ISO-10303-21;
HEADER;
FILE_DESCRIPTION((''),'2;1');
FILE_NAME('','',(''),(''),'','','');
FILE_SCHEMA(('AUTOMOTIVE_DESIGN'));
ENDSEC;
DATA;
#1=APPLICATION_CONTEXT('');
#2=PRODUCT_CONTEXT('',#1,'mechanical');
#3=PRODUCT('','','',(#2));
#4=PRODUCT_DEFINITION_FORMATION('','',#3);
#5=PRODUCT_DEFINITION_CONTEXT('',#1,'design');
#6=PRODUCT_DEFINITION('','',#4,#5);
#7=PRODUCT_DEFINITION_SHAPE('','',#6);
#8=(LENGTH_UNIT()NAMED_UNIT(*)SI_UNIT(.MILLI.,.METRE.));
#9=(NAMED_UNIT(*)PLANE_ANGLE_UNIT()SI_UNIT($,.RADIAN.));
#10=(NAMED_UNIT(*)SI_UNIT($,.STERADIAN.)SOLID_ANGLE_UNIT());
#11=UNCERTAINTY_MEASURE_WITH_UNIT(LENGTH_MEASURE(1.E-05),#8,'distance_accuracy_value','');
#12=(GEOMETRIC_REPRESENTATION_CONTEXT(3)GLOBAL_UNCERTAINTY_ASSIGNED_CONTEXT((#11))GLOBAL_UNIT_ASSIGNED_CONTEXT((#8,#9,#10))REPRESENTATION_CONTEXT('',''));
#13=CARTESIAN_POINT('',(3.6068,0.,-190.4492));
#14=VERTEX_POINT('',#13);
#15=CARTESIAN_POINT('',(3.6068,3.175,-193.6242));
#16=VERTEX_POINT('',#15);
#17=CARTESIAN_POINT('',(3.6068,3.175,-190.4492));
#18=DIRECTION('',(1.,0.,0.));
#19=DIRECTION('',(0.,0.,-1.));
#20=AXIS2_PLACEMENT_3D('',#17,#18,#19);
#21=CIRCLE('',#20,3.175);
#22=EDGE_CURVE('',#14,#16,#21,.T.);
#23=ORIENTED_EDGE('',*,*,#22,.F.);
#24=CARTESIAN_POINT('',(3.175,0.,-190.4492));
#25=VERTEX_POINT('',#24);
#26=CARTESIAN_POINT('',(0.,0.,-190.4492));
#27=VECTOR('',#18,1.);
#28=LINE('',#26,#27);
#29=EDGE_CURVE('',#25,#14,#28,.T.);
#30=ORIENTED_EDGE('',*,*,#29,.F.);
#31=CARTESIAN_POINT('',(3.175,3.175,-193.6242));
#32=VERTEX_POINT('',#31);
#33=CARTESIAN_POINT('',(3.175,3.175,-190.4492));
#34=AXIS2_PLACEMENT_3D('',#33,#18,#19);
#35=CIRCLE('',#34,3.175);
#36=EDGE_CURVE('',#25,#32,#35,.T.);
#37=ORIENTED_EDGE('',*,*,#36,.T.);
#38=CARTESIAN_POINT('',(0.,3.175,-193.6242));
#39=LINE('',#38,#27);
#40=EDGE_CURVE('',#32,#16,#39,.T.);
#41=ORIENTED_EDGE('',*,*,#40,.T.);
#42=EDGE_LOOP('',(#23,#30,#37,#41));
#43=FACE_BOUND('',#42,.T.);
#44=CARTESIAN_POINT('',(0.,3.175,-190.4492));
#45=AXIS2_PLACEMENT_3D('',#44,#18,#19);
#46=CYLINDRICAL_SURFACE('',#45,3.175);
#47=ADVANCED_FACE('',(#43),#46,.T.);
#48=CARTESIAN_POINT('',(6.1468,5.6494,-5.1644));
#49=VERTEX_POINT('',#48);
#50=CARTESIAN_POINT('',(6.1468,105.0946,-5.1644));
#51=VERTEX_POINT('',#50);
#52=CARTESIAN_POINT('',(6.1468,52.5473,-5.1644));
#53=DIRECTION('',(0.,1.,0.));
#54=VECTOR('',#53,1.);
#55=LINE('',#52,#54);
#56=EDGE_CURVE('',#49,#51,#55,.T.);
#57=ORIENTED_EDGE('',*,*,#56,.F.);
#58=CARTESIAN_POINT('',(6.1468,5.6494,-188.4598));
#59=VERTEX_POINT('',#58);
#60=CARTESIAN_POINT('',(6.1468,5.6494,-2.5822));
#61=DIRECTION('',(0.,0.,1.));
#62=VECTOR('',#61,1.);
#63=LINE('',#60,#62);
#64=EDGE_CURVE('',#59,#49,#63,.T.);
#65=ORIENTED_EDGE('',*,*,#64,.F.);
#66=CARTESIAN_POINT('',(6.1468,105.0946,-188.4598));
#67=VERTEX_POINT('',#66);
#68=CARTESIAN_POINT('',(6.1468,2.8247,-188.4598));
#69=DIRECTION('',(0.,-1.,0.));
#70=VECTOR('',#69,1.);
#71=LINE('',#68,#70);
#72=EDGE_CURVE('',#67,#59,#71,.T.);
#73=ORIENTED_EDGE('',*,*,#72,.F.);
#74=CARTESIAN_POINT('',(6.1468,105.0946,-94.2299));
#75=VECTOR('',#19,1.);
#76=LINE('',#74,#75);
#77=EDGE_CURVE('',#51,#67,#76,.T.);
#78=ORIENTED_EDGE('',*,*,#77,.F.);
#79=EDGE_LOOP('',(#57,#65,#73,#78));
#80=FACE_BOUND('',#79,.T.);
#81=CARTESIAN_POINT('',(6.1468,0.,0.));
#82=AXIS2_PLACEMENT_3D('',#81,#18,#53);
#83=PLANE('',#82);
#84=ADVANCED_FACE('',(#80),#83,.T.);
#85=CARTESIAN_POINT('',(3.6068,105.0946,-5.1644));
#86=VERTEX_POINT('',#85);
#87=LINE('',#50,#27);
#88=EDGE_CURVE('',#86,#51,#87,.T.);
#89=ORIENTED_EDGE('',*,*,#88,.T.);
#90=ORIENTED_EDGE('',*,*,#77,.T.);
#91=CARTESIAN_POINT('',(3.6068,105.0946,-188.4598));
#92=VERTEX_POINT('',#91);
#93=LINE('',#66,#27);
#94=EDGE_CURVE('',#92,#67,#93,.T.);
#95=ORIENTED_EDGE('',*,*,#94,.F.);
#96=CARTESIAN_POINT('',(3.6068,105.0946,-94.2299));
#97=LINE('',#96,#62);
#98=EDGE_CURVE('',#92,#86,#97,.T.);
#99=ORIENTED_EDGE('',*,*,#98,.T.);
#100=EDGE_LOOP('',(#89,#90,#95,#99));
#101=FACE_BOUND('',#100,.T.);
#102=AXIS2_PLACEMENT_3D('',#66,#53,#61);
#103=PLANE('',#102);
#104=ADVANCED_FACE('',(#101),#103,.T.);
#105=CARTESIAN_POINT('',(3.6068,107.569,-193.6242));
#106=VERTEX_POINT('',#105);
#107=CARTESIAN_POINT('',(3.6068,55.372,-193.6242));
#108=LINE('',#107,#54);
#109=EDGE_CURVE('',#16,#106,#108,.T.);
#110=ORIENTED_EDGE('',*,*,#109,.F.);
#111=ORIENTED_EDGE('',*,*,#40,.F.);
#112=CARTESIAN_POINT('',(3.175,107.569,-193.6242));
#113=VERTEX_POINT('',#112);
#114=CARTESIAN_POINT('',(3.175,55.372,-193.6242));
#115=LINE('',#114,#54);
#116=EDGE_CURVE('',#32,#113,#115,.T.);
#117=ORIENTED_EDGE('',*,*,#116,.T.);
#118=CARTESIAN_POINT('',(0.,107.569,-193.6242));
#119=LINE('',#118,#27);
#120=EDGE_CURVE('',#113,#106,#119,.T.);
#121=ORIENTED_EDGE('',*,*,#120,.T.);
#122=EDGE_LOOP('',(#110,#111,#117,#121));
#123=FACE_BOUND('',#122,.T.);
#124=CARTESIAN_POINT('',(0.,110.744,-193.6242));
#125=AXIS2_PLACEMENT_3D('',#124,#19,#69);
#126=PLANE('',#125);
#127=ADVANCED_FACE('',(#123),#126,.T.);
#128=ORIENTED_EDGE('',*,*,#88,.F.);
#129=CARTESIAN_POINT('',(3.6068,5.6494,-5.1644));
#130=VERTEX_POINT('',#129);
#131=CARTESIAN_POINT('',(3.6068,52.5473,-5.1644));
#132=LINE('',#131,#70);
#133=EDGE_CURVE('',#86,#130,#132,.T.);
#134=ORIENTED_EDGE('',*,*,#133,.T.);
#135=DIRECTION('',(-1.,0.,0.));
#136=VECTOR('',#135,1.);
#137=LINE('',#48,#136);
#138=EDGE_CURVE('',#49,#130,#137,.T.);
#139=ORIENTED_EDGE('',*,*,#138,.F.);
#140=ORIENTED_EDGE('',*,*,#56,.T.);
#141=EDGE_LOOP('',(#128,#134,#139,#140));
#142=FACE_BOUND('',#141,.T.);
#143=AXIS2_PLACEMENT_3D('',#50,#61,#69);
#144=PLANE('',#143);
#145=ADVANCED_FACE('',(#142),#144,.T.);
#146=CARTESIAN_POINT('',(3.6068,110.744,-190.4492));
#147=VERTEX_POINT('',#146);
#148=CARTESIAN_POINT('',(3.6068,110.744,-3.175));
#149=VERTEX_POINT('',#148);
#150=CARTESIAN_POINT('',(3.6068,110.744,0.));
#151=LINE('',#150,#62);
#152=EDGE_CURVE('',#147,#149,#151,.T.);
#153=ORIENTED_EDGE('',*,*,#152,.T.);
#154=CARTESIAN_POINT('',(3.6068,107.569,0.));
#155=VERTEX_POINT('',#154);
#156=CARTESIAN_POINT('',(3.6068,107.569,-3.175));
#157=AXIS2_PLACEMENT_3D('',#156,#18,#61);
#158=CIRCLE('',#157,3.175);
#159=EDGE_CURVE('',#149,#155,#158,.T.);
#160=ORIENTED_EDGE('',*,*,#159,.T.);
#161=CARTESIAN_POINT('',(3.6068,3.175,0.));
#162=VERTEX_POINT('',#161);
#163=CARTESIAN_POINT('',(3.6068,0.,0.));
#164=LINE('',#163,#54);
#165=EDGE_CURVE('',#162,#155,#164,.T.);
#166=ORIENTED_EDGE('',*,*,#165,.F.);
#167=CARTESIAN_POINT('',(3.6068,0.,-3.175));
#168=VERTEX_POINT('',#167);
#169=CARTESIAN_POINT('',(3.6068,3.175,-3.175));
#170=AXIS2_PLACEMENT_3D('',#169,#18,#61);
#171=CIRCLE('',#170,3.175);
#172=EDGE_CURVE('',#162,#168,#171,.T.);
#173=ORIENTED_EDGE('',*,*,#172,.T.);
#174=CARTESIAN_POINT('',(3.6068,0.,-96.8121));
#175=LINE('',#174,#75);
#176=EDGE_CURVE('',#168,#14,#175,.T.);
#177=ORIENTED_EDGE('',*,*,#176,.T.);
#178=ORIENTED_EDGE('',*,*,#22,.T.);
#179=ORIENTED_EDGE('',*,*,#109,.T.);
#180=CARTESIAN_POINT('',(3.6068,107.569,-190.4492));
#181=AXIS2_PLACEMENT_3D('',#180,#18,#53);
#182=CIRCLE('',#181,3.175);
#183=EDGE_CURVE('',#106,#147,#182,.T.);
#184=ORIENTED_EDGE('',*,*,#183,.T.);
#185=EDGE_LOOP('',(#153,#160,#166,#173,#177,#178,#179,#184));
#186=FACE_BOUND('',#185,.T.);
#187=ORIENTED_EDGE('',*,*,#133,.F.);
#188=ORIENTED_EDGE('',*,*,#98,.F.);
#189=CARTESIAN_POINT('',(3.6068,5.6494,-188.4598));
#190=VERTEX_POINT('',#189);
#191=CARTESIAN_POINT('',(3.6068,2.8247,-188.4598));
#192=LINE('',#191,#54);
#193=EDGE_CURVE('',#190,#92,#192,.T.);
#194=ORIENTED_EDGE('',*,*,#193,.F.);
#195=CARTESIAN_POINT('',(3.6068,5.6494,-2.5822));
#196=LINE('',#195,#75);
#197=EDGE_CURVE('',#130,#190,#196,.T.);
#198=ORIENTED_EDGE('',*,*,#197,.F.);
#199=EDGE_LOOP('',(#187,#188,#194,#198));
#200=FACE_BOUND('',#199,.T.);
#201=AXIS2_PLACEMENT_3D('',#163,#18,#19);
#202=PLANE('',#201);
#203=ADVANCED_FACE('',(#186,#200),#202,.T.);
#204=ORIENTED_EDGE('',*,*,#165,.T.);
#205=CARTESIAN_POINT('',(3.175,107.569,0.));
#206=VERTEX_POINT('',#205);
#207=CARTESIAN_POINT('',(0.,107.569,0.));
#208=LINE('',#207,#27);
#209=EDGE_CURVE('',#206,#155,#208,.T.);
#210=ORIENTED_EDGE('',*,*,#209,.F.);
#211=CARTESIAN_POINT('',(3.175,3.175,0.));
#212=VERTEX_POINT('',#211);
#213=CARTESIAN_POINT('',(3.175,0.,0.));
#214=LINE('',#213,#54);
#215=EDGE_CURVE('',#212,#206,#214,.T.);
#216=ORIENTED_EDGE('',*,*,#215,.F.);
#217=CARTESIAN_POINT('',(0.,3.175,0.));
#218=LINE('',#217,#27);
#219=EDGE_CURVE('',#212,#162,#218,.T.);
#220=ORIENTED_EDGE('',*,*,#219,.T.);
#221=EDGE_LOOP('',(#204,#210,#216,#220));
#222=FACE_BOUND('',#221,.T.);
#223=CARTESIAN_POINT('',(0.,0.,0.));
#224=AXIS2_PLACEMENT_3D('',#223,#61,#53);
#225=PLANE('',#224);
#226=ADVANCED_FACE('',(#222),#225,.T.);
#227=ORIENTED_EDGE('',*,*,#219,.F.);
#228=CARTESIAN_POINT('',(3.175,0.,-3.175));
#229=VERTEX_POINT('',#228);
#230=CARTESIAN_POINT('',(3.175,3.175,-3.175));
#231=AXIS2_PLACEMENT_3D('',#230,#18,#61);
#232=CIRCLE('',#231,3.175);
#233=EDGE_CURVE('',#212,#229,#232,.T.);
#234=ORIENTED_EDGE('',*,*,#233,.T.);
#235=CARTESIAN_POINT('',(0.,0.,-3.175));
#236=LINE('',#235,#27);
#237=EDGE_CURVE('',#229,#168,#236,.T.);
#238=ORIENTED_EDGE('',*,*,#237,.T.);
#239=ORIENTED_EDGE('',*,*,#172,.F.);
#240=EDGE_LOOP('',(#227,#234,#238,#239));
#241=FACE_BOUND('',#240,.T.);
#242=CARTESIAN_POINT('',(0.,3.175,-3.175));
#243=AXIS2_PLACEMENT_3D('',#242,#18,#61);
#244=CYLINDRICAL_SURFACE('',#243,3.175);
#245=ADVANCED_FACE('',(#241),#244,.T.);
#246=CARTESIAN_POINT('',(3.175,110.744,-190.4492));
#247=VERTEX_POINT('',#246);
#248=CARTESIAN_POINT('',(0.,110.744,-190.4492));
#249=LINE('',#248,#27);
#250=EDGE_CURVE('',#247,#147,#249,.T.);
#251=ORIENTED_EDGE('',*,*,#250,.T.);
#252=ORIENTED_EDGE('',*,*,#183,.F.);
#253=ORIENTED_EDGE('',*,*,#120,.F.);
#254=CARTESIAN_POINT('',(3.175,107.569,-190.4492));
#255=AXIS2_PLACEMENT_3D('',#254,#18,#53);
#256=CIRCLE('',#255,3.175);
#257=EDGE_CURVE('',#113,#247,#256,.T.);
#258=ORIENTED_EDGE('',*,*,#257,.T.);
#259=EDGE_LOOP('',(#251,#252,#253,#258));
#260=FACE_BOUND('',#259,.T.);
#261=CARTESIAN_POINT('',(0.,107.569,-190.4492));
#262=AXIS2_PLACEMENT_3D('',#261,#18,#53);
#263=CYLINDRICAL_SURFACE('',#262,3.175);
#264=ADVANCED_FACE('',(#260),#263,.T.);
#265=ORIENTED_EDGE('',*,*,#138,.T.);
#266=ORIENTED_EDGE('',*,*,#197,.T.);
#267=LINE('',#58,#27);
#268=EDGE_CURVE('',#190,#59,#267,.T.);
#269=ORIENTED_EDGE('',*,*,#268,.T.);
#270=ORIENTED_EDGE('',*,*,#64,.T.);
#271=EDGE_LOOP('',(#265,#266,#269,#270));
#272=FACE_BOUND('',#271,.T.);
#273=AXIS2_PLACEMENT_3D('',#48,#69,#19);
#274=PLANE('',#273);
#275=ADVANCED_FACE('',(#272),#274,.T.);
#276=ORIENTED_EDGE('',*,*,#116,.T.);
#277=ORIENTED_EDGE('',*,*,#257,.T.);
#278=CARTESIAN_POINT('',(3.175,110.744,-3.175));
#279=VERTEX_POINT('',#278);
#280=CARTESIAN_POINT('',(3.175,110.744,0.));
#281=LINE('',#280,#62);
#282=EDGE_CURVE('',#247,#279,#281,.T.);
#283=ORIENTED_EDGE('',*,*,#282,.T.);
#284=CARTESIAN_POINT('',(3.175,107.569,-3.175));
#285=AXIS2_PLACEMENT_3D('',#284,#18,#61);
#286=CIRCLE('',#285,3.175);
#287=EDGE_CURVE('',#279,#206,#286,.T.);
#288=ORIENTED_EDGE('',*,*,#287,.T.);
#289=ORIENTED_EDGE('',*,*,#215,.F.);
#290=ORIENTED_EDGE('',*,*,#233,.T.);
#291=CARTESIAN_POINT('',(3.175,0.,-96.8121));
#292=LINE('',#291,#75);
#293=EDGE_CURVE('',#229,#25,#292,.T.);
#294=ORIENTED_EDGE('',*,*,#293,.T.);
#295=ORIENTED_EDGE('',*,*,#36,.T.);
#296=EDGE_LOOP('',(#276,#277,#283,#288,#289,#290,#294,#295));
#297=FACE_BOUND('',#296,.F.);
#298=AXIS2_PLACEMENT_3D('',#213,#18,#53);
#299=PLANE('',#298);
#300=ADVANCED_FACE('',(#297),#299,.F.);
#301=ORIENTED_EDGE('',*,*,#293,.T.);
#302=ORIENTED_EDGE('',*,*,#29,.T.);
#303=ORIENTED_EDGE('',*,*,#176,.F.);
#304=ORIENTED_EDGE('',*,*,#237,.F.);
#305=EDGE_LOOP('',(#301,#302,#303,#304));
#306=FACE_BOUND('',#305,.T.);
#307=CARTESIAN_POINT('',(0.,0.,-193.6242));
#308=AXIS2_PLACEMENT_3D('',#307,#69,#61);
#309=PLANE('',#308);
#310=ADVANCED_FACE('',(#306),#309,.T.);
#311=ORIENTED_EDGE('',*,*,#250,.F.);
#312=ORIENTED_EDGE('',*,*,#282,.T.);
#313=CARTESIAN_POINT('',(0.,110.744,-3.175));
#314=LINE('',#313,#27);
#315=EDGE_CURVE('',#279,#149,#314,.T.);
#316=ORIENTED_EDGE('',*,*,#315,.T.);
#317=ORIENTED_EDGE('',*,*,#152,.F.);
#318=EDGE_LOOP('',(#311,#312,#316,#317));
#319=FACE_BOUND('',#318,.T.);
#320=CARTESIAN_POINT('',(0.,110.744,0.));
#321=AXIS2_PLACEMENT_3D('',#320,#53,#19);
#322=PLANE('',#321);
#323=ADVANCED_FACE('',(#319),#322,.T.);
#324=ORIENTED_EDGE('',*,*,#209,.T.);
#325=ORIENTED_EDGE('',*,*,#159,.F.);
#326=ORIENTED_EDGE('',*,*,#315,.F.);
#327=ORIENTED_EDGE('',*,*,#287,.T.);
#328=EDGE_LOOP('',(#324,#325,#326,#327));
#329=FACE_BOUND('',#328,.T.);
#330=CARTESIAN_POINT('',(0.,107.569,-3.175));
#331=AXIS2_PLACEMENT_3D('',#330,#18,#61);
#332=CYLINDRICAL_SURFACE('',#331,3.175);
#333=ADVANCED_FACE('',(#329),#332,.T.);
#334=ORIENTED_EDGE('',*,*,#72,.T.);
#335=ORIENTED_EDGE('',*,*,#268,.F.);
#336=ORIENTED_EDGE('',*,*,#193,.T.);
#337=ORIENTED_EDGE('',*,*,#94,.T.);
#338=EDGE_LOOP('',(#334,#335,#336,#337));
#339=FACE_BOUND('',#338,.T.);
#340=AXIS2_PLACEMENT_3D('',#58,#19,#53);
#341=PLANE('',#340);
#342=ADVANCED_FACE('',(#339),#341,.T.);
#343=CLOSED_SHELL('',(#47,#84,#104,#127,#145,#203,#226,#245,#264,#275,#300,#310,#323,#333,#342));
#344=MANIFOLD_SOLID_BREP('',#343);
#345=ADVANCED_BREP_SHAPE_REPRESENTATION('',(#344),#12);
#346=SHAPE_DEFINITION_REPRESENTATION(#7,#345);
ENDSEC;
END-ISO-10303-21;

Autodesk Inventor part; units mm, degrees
ref_plane "YZ Plane" through (0, 0, 0) normal (1, 0, 0) x (0, 1, 0)
ref_plane "XZ Plane" through (0, 0, 0) normal (0, 1, 0) x (-1, 0, 0)
ref_plane "XY Plane" through (0, 0, 0) normal (0, 0, 1) x (1, 0, 0)
sketch "Sketch1" plane through (0, 0, 0) normal (1, 0, 0) x (0, 1, 0)
  line L0 (0, 0) -> (110.744, 0)
  line L1 (110.744, 0) -> (110.744, -193.6242)
  line L2 (110.744, -193.6242) -> (0, -193.6242)
  line L3 (0, -193.6242) -> (0, 0)
  dimension "d0" = 193.6242
  dimension "d1" = 110.744
extrude "Extrusion1" add sketch "Sketch1" along normal blind 6.1468
fillet "Fillet1" radius 3.175 4 edges at (3.0734, 110.744, 0) (3.0734, 0, 0) (3.0734, 110.744, -193.6242) (3.0734, 0, -193.6242)
sketch "Sketch3" plane through (6.1468, 0, 0) normal (1, 0, 0) x (0, 0, -1)
  arc A0 (3.175, 110.744) -> (0, 107.569) centre (3.175, 107.569) ccw construction
  arc A1 (190.4492, 0) -> (193.6242, 3.175) centre (190.4492, 3.175) ccw construction
  line L0 (3.175, 107.569) -> (190.4492, 3.175) construction
  arc A2 (193.6242, 107.569) -> (190.4492, 110.744) centre (190.4492, 107.569) ccw construction
  arc A3 (0, 3.175) -> (3.175, 0) centre (3.175, 3.175) ccw construction
  line L1 (190.4492, 107.569) -> (3.175, 3.175) construction
  line L2 (5.1644, 5.6494) -> (188.4598, 5.6494)
  line L3 (188.4598, 5.6494) -> (188.4598, 105.0946)
  line L4 (188.4598, 105.0946) -> (5.1644, 105.0946)
  line L5 (5.1644, 105.0946) -> (5.1644, 5.6494)
  line L6 (5.1644, 5.6494) -> (188.4598, 105.0946) construction
  line L7 (188.4598, 5.6494) -> (5.1644, 105.0946) construction
  arc A4 (190.4492, 0) -> (193.6242, 3.175) centre (190.4492, 3.175) ccw projected
  line L8 (193.6242, 3.175) -> (193.6242, 107.569) projected
  arc A5 (193.6242, 107.569) -> (190.4492, 110.744) centre (190.4492, 107.569) ccw projected
  line L9 (190.4492, 110.744) -> (3.175, 110.744) projected
  arc A6 (3.175, 110.744) -> (0, 107.569) centre (3.175, 107.569) ccw projected
  line L10 (0, 107.569) -> (0, 3.175) projected
  arc A7 (0, 3.175) -> (3.175, 0) centre (3.175, 3.175) ccw projected
  line L11 (3.175, 0) -> (190.4492, 0) projected
  point P0 (0, 0)
  point P1 (96.8121, 55.372)
extrude "Extrusion3" cut sketch "Sketch3" against normal blind 2.54
move faces "Move1" translate (3.175, 0, 0) faces at (0, 36.9147, -65.5997)
properties part number "screen"
